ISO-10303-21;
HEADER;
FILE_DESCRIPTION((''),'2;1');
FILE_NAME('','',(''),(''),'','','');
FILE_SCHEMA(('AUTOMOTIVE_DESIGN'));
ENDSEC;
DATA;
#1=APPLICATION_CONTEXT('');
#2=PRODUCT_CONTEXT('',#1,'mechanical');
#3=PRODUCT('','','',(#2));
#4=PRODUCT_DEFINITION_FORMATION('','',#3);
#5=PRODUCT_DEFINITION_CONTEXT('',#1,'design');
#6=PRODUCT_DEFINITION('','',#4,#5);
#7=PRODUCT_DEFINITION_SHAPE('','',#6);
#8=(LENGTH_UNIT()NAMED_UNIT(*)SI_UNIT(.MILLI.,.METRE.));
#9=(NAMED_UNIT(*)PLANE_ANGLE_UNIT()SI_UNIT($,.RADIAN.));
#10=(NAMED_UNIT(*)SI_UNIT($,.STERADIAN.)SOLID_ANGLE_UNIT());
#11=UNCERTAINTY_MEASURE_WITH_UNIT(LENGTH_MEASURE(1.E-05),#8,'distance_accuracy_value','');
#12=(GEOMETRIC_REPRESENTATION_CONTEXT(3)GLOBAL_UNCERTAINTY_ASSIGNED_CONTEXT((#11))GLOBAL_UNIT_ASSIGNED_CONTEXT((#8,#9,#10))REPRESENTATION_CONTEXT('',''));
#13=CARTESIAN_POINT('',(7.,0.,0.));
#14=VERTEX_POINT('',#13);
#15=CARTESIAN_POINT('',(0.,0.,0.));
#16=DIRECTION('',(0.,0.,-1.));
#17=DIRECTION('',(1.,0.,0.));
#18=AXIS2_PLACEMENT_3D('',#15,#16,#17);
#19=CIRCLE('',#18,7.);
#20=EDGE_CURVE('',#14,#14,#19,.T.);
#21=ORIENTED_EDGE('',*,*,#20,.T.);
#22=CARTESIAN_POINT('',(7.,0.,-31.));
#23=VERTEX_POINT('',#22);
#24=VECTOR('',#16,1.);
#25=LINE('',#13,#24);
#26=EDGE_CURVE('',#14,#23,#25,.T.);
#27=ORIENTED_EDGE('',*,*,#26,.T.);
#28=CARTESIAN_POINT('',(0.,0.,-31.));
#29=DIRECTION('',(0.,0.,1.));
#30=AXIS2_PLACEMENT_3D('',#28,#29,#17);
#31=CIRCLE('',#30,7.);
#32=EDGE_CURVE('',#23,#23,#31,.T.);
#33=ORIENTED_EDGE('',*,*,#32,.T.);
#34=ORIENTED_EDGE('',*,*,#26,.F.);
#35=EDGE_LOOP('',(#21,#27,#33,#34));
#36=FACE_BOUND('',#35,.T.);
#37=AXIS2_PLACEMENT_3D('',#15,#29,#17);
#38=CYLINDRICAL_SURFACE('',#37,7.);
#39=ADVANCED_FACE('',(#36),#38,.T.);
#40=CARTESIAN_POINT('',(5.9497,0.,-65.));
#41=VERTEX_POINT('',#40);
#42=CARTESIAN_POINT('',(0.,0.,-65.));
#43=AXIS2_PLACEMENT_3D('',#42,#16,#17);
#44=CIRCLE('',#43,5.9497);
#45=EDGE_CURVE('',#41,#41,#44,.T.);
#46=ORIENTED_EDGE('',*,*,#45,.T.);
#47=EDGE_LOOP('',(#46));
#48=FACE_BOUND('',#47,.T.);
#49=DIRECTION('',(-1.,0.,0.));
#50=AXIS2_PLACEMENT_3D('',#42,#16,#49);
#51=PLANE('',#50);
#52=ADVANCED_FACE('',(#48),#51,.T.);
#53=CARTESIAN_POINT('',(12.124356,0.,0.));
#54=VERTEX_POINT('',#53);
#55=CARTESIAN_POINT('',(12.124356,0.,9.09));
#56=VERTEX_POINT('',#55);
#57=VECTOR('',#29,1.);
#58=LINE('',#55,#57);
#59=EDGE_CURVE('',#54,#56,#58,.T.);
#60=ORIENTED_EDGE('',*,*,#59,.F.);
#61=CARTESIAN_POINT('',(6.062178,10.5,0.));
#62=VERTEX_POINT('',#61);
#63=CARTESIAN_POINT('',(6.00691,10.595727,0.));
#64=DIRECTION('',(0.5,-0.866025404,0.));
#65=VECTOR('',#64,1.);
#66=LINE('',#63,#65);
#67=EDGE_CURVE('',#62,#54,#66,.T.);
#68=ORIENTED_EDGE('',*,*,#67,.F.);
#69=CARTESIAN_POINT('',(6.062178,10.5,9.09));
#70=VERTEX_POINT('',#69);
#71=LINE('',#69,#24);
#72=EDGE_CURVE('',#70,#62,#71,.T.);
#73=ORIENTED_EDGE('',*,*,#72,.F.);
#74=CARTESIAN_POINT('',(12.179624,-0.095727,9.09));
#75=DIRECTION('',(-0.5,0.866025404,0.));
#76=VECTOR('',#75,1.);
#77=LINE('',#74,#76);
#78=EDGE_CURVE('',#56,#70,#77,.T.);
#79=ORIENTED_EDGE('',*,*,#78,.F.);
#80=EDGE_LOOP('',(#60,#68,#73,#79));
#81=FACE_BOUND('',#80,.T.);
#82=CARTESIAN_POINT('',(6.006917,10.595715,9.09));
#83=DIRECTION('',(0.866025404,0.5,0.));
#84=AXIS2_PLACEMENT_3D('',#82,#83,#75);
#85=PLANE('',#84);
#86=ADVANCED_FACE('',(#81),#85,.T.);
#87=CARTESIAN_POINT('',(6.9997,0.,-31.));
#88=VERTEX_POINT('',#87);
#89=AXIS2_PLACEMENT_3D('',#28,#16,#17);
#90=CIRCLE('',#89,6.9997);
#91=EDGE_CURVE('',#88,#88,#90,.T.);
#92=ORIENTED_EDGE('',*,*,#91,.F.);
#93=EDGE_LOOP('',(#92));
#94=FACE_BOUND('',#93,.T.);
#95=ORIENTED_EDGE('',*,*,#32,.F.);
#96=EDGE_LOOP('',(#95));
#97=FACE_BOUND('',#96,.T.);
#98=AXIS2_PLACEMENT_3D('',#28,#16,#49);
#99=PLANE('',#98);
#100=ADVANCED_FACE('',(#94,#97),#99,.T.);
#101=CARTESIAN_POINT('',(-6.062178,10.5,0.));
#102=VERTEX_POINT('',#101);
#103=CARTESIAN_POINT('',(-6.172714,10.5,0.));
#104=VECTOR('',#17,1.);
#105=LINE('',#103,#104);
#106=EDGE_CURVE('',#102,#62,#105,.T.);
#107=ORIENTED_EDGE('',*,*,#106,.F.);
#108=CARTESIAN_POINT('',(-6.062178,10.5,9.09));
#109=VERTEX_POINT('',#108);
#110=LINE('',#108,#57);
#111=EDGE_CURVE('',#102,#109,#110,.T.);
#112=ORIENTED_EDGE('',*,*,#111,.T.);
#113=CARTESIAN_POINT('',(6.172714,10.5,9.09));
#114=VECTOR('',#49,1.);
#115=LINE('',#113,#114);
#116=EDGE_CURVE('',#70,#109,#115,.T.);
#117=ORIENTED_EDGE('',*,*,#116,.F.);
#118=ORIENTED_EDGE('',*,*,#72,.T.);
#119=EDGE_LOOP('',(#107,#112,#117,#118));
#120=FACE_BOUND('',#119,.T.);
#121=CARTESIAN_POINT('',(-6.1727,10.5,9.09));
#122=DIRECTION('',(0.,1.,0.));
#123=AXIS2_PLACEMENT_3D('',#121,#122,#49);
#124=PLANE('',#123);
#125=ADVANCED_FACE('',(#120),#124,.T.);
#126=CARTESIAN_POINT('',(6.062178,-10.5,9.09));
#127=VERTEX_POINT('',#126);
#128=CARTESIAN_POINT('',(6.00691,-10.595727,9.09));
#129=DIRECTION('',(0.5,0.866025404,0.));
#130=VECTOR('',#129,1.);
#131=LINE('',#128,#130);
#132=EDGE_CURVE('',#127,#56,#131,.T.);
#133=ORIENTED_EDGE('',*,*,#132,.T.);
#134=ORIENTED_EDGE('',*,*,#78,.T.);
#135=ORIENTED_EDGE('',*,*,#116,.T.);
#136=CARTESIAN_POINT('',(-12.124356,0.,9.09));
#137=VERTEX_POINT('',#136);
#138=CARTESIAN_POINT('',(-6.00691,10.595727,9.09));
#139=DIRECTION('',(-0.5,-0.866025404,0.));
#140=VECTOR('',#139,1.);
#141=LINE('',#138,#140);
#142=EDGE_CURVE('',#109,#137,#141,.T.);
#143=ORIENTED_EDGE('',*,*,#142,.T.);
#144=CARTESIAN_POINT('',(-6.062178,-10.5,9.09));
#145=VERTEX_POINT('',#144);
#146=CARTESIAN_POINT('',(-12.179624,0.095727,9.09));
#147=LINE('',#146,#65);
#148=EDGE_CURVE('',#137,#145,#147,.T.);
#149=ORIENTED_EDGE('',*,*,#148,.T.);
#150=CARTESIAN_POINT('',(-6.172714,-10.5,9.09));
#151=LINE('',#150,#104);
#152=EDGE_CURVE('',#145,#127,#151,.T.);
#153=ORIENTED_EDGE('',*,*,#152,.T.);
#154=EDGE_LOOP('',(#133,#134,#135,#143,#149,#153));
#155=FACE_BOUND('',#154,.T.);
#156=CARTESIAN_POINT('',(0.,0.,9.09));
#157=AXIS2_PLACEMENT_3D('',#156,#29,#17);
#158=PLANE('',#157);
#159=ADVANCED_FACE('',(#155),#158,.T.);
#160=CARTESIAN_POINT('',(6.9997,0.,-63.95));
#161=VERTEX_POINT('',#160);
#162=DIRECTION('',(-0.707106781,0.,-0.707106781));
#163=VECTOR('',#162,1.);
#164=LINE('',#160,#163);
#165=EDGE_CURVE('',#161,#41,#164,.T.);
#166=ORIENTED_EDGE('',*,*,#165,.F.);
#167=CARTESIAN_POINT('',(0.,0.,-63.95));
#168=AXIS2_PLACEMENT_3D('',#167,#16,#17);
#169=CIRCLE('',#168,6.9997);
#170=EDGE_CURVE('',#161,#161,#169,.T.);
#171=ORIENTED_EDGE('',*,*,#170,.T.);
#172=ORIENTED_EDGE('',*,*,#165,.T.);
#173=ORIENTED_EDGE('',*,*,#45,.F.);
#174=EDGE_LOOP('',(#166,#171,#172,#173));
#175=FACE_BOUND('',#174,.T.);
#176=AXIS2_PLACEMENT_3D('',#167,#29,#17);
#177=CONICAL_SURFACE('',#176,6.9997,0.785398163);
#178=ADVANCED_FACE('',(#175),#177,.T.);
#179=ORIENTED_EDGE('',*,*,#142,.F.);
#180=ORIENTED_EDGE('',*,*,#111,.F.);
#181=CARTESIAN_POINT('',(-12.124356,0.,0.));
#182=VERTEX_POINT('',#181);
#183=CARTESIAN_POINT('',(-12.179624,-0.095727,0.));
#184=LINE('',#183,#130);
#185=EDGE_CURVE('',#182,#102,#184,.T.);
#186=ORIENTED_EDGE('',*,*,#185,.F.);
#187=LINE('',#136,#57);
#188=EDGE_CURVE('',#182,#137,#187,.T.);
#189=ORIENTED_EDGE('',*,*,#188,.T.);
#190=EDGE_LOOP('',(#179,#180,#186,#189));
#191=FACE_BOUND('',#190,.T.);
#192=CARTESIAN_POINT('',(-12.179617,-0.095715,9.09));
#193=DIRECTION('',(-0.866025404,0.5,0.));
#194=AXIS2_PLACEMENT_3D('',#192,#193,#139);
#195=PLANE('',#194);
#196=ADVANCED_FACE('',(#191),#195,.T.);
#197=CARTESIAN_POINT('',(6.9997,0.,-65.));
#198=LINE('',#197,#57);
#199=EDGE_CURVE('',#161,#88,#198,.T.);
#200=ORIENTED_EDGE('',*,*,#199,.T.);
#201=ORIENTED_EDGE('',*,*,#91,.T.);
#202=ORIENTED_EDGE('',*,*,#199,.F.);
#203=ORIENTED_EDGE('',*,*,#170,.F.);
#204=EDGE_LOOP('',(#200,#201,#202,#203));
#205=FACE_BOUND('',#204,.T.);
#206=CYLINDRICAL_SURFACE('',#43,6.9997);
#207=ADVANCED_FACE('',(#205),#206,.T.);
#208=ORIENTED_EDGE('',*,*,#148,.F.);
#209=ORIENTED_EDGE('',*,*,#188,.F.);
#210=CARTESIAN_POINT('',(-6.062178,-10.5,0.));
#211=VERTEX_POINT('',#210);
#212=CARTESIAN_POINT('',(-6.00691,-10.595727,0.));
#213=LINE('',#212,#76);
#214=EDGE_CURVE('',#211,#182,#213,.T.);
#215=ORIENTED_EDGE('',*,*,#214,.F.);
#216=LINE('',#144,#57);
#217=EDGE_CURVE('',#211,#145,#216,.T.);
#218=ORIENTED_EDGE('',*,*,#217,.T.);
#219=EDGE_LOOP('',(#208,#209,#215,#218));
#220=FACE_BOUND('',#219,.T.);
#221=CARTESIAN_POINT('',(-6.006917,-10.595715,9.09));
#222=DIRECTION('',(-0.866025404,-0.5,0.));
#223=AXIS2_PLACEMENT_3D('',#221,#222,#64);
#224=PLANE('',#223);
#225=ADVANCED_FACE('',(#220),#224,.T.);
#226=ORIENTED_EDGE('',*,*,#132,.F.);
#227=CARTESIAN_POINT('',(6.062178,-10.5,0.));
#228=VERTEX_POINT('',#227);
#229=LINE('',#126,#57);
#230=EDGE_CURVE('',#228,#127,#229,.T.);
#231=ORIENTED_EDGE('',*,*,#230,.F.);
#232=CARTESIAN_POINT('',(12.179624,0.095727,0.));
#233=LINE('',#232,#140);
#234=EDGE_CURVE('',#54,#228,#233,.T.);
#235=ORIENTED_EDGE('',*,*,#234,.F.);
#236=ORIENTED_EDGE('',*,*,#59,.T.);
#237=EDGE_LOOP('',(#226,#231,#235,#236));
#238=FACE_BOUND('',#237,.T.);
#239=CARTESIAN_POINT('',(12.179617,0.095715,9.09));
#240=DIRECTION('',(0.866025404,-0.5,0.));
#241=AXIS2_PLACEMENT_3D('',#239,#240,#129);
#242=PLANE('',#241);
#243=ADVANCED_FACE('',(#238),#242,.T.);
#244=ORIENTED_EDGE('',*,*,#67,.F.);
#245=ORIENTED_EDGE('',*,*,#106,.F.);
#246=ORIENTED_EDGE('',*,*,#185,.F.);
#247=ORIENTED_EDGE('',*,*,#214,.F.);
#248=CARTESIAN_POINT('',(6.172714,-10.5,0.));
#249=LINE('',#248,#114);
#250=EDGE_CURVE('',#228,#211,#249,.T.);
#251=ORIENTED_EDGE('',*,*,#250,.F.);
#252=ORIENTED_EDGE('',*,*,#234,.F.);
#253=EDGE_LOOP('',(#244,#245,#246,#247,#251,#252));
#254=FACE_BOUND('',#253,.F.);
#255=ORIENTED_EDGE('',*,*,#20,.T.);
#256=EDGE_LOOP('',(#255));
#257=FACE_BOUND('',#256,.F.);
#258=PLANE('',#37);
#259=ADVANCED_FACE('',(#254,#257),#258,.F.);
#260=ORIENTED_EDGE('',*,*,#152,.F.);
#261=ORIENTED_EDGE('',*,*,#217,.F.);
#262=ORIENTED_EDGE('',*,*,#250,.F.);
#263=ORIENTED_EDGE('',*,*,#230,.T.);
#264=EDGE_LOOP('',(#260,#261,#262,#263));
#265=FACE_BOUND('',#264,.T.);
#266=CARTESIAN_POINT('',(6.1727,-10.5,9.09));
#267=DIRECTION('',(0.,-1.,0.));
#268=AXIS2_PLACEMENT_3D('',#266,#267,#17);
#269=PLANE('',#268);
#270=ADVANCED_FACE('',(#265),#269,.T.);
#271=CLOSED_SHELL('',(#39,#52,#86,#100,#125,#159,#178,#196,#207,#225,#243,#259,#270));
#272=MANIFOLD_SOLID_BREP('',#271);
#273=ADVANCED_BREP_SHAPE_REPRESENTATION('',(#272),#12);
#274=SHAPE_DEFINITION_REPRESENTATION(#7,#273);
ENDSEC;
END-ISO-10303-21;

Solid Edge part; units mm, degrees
sketch "Sketch1" plane through (0, 0, 0) normal (0, 0, 1) x (1, 0, 0)
  circle A0 centre (0, 0) radius 12.18
  dimension "D1" = 24.36
extrude "Protrusion1" add sketch "Sketch1" along normal blind 9.09
sketch "Sketch2" plane through (0, 0, 0) normal (0, 0, -1) x (1, 0, 0)
  circle A0 centre (0, 0) radius 7
extrude "Protrusion2" add sketch "Sketch2" along normal blind 65
sketch "Sketch3" plane through (0, 0, -65) normal (0, 0, -1) x (1, 0, 0)
  circle A0 centre (0, 0) radius 6.9997
extrude "Cutout1" cut sketch "Sketch3" against normal blind 34 flip side to cut
chamfer "Chamfer_1" distance 1.05 angle 45 1 edges at (-6.9997, 0, -65)
sketch "Sketch4" plane through (0, 0, 9.09) normal (0, 0, 1) x (1, 0, 0)
  line L0 (-6.1727, 10.5) -> (6.1727, 10.5)
  dimension "D1" = 21
extrude "Cutout2" cut sketch "Sketch4" against normal up to next material side at (0, 10.55, 9.09)
pattern_circular "Pattern1" count 6 over 360 about axis through (0, 0, 9.09) along (0, 0, 1) of "Cutout2"
properties part number "24104610"
